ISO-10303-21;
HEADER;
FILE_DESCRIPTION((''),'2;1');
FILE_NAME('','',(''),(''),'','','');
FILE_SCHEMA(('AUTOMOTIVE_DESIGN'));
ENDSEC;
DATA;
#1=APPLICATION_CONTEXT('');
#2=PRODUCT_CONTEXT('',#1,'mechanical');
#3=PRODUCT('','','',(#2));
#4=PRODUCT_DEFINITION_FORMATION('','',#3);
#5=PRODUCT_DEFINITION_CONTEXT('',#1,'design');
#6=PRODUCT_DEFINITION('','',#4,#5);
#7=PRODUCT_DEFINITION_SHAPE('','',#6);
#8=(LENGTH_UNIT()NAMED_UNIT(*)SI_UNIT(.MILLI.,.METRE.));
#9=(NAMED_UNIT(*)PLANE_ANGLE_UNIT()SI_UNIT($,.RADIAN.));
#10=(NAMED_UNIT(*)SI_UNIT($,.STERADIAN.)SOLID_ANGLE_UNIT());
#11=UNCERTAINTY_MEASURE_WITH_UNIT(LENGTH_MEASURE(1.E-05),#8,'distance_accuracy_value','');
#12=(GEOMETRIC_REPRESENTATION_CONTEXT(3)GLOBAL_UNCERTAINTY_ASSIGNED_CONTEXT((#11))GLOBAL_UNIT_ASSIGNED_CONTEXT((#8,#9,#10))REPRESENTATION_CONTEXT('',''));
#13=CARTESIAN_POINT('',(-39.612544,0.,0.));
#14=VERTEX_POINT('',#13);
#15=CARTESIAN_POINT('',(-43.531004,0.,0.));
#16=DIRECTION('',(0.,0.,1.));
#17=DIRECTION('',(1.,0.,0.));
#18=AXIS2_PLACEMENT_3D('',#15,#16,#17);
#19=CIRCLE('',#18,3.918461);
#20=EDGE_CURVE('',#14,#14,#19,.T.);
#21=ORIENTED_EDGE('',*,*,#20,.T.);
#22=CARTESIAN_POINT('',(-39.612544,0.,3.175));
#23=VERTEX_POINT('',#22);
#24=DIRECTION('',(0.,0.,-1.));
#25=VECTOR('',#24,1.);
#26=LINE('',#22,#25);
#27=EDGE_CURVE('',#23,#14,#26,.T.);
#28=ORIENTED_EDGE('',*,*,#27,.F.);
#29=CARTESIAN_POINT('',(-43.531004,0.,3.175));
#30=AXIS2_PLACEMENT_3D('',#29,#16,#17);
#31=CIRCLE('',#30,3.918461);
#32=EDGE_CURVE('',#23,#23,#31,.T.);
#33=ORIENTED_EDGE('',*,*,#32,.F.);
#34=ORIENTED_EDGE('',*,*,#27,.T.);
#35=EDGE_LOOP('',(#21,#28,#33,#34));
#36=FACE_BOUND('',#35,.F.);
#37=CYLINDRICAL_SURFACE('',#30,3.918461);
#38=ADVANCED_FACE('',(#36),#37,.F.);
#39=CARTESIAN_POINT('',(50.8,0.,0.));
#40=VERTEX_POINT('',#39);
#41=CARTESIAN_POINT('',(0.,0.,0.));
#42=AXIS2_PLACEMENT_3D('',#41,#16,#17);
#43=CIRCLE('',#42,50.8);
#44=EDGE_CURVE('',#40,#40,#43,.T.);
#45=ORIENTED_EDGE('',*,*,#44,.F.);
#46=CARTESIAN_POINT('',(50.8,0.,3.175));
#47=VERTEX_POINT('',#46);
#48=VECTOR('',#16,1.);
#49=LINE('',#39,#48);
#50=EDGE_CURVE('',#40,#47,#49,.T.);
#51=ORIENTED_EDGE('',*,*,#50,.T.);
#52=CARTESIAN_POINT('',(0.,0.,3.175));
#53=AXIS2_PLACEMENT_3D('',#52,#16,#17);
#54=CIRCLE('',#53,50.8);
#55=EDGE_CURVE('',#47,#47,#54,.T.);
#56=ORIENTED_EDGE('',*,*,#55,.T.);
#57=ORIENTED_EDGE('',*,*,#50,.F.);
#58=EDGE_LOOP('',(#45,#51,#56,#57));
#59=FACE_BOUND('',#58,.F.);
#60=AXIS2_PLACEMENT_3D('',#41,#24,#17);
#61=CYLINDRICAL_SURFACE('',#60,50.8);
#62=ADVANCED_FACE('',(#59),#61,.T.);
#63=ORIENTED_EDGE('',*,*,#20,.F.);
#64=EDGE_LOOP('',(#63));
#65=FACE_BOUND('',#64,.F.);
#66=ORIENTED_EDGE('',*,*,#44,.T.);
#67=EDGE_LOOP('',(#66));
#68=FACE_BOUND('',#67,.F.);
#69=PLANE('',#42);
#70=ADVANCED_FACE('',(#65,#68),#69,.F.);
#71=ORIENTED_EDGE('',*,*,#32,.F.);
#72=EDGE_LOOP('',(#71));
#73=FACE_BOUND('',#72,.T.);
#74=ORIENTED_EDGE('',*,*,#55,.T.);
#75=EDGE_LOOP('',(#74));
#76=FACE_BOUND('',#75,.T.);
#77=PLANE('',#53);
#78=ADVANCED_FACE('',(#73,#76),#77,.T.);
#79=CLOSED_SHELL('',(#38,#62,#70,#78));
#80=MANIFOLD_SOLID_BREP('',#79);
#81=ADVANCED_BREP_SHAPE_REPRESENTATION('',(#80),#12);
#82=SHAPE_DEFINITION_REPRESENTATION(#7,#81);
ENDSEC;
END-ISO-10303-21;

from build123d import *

# Parameters (mm, degrees)
F0_R     = 50.8
F1_DEPTH = 3.175
F2_R     = 3.9184607148
F3_DEPTH = 25.4


# Not quite as in the source:
# - a length typed as a fraction of an inch, garbled in the dataset ("3 / 203.2 mm" for 3/8 in), is restored


with BuildPart() as f1:
    # F0 (on Top) → F1 (new body)
    with BuildSketch(Plane.XY):
        Circle(F0_R)
    extrude(amount=F1_DEPTH)

    # F2 (on face) → F3 (cut)
    with BuildSketch(Plane.XY.offset(3.175)):
        with Locations((-43.5310043395, 0)):
            Circle(F2_R)
    extrude(amount=-F3_DEPTH, mode=Mode.SUBTRACT)


solid = f1.part
